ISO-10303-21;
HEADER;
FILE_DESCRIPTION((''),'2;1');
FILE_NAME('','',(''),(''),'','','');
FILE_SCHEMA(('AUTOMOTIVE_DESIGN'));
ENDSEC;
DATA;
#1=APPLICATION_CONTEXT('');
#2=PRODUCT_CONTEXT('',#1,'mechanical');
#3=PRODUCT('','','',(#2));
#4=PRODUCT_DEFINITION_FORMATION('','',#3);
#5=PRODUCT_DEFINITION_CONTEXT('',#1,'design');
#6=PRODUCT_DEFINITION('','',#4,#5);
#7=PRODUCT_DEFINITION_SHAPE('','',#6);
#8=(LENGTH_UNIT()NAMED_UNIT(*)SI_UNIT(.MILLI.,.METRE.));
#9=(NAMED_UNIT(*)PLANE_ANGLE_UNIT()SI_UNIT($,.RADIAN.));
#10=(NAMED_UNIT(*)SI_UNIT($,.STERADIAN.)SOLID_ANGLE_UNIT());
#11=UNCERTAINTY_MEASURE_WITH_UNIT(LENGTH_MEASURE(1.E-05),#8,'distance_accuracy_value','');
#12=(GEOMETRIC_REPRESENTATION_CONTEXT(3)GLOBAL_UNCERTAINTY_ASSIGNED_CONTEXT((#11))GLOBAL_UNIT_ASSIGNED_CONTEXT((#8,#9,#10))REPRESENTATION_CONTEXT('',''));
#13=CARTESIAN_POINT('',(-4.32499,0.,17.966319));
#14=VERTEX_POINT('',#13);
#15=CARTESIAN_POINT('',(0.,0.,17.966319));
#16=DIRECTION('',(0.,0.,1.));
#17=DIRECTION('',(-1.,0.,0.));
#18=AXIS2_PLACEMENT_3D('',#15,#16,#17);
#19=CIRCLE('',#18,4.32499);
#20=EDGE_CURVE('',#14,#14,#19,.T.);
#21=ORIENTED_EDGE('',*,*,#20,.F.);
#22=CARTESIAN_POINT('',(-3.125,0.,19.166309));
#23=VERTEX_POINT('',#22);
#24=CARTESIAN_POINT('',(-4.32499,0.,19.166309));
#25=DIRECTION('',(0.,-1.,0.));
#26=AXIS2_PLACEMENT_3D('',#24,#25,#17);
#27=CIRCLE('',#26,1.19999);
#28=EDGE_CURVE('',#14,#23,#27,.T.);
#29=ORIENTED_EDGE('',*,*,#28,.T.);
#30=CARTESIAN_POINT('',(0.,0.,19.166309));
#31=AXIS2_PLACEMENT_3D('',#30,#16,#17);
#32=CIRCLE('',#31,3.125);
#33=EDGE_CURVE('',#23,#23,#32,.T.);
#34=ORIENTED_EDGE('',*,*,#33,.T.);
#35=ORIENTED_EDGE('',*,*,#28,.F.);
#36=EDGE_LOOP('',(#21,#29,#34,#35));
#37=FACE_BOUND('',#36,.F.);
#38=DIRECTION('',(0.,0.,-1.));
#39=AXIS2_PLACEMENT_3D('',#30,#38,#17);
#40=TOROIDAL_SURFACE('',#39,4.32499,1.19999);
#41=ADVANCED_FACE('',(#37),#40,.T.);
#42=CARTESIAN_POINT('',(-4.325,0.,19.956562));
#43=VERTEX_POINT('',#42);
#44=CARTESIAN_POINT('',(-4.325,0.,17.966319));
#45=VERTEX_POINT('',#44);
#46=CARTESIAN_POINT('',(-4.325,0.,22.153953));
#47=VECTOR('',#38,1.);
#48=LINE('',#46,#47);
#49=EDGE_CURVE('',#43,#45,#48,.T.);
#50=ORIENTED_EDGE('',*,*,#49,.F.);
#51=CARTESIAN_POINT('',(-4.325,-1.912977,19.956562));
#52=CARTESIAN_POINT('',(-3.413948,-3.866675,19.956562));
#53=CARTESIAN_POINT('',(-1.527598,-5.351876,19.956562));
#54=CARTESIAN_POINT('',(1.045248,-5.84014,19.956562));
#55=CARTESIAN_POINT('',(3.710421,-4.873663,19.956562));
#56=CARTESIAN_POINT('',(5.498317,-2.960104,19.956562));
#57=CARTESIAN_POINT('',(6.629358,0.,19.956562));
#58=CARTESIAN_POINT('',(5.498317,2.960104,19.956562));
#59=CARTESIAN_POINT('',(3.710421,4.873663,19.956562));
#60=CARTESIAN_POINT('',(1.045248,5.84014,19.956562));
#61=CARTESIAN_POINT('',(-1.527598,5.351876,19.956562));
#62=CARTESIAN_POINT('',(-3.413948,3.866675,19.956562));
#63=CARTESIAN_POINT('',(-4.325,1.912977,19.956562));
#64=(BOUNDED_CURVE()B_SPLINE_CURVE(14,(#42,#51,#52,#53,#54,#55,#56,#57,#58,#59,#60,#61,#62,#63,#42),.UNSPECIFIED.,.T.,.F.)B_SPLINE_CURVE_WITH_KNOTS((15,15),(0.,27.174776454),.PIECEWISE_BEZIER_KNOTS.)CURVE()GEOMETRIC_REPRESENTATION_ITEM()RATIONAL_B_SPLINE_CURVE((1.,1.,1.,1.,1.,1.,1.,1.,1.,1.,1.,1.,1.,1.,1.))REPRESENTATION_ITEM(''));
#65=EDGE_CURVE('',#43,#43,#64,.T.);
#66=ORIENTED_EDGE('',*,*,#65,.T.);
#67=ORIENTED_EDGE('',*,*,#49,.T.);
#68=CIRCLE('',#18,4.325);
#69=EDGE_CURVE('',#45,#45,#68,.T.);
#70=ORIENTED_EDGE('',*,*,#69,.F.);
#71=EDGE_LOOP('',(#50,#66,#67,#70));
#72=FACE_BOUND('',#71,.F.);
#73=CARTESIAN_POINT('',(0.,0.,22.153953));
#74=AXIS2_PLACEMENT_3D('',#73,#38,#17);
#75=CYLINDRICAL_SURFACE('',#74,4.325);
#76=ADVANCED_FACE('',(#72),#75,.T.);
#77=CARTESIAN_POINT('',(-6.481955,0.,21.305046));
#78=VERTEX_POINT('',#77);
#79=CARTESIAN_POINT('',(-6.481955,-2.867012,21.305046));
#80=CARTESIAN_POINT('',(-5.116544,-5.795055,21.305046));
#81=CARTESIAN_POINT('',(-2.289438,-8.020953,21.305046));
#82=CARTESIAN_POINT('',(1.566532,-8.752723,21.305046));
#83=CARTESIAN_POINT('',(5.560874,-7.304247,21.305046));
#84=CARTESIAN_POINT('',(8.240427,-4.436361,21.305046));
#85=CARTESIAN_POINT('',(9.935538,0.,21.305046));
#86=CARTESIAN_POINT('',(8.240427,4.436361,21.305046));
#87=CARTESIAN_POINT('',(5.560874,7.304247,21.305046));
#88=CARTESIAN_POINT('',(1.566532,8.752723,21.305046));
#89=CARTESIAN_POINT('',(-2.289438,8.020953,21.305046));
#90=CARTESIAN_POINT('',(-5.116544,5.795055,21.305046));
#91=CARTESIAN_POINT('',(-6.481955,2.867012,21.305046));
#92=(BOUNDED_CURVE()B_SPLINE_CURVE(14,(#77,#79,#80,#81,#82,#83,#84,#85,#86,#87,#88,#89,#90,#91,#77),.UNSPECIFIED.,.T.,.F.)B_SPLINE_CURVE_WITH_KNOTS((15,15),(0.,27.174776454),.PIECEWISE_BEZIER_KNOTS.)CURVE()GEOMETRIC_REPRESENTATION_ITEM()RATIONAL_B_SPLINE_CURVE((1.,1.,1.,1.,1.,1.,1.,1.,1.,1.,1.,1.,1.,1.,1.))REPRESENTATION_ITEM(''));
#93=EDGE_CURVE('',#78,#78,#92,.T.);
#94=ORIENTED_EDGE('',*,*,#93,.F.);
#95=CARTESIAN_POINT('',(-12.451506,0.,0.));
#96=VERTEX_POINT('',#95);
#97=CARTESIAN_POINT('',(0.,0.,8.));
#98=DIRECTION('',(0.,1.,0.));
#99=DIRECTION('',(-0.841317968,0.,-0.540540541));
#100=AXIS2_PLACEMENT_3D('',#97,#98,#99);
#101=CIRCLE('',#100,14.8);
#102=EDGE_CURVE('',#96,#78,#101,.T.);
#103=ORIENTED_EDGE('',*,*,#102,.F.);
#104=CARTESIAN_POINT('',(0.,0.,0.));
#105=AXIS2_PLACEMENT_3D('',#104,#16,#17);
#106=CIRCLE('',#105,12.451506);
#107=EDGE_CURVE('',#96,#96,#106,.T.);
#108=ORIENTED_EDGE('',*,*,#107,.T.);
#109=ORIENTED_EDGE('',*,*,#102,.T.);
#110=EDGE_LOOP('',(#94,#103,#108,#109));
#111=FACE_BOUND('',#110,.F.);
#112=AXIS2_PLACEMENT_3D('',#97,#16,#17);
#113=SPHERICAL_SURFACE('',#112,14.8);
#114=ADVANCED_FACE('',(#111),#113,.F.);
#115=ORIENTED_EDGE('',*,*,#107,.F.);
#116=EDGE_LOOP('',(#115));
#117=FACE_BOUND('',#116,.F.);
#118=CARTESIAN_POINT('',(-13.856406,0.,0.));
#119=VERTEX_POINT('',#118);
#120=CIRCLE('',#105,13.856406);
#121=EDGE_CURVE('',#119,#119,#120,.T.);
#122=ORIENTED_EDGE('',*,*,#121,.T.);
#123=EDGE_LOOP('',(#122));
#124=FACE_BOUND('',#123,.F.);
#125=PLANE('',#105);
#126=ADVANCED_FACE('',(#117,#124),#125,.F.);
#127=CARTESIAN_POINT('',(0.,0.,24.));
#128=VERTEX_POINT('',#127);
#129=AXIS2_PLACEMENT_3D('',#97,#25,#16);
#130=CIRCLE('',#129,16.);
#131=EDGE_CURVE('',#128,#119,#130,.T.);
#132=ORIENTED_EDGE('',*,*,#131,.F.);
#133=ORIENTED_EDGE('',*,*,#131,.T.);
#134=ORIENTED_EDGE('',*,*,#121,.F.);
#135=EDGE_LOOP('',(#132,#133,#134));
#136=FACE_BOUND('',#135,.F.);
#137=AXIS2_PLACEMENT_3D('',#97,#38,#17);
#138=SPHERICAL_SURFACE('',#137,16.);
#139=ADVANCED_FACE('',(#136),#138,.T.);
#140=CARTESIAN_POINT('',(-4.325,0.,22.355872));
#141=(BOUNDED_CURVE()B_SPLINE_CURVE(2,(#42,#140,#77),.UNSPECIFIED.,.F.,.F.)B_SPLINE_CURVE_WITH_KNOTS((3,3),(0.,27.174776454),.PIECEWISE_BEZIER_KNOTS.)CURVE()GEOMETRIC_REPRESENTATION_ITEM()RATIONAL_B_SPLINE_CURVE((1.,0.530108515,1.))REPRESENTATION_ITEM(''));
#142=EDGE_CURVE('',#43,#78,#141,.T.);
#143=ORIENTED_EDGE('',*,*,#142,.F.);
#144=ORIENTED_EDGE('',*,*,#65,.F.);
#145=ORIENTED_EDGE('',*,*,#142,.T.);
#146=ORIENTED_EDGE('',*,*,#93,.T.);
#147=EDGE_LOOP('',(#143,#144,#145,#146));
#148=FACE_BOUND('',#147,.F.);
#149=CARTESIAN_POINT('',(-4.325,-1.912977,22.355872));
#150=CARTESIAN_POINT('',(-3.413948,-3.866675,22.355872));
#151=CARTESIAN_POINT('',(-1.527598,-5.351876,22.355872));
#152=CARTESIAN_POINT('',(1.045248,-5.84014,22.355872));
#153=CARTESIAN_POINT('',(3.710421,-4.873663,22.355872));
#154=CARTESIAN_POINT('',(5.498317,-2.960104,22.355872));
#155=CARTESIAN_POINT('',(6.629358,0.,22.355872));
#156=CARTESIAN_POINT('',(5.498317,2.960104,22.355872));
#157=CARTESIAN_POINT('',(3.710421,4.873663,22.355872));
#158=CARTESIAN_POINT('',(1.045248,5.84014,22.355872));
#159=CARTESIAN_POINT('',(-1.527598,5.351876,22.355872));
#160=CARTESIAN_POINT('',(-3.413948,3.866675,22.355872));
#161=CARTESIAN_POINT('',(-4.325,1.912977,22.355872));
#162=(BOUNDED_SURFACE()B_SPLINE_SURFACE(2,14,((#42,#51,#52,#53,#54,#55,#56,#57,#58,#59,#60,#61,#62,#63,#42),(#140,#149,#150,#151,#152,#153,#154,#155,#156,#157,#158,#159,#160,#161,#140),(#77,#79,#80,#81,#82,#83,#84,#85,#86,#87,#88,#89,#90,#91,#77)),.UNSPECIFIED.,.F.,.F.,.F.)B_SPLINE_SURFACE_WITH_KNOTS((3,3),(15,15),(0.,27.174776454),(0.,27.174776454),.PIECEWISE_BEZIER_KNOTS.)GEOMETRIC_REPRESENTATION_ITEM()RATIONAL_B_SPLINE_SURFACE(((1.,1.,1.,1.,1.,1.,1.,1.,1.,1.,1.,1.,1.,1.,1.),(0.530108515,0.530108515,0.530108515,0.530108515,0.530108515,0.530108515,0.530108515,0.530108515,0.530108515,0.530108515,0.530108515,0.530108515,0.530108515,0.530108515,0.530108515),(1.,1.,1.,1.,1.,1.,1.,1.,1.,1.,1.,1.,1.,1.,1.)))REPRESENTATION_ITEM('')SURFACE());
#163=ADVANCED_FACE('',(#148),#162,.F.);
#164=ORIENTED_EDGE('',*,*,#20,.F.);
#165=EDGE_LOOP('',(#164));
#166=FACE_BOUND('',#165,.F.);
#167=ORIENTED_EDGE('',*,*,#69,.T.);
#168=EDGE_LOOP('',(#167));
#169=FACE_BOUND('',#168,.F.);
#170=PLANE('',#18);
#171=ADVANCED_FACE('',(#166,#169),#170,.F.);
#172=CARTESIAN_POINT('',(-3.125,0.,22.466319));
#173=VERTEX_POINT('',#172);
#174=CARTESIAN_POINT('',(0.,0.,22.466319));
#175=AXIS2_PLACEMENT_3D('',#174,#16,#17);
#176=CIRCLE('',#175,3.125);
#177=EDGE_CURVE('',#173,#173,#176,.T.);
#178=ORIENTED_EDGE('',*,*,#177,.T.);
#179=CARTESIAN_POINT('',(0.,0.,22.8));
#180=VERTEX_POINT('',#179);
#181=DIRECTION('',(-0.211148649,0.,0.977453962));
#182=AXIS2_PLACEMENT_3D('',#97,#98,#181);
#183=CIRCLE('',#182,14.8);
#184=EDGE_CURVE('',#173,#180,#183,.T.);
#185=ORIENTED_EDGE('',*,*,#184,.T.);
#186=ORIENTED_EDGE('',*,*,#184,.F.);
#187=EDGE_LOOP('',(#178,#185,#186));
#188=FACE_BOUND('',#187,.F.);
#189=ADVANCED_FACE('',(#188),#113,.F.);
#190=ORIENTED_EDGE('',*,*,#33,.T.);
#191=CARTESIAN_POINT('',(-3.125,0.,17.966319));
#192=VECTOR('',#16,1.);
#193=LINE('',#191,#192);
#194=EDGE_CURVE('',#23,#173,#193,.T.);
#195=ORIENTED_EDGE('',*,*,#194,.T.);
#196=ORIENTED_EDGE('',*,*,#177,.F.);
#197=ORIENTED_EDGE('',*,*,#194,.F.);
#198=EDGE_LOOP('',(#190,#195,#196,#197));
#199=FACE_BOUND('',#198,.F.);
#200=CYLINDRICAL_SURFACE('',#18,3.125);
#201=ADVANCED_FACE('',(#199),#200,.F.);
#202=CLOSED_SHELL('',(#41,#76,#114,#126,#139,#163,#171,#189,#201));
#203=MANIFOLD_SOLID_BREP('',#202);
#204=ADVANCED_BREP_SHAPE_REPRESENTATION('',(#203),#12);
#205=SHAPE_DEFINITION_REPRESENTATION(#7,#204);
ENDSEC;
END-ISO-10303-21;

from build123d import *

# Parameters (mm, degrees)
F2_R = 1.19999
F3_R = 1.5


# Not quite as in the source:
# - a fillet or chamfer is up to 0.001 mm smaller than in the source, because OpenCascade refuses the exact size


with BuildPart() as f1:
    # F0 (on Front) → F1 (revolve)
    with BuildSketch(Plane.XZ):
        with BuildLine():
            Line((0, 22.8), (0, 24))
            ThreePointArc((0, 24), (-13.8564064606, 16), (-13.8564064606, 0))
            Line((-13.8564064606, 0), (-12.451505933, 0))
            ThreePointArc((-12.451505933, 0), (-13.8946821516, 13.0968429353), (-4.325, 22.1539526282))
            ThreePointArc((-4.325, 22.1539526282), (-3.7282728081, 22.322708608), (-3.125, 22.4663186402))
            ThreePointArc((-3.125, 22.4663186402), (-1.571382214, 22.7163432257), (0, 22.8))
        make_face()
        with BuildLine():
            Line((-3.125, 17.9663186402), (-3.125, 22.4663186402))
            ThreePointArc((-3.125, 22.4663186402), (-3.7282728081, 22.322708608), (-4.325, 22.1539526282))
            Line((-4.325, 22.1539526282), (-4.325, 17.9663186402))
            Line((-4.325, 17.9663186402), (-3.125, 17.9663186402))
        make_face()
    revolve(axis=Axis((0, 0, 23.4), (0, 0, 1)))

    # F2 (radius 1.2 in the source; OpenCascade refuses exactly that, so slightly less here)
    f2_edges = [f1.edges().sort_by_distance(p)[0] for p in [
        (3.125, 0, 17.966319),
    ]]
    fillet(f2_edges, radius=F2_R)

    # F3
    f3_edges = [f1.edges().sort_by_distance(p)[0] for p in [
        (4.325, 0, 22.153953),
    ]]
    fillet(f3_edges, radius=F3_R)


solid = f1.part
